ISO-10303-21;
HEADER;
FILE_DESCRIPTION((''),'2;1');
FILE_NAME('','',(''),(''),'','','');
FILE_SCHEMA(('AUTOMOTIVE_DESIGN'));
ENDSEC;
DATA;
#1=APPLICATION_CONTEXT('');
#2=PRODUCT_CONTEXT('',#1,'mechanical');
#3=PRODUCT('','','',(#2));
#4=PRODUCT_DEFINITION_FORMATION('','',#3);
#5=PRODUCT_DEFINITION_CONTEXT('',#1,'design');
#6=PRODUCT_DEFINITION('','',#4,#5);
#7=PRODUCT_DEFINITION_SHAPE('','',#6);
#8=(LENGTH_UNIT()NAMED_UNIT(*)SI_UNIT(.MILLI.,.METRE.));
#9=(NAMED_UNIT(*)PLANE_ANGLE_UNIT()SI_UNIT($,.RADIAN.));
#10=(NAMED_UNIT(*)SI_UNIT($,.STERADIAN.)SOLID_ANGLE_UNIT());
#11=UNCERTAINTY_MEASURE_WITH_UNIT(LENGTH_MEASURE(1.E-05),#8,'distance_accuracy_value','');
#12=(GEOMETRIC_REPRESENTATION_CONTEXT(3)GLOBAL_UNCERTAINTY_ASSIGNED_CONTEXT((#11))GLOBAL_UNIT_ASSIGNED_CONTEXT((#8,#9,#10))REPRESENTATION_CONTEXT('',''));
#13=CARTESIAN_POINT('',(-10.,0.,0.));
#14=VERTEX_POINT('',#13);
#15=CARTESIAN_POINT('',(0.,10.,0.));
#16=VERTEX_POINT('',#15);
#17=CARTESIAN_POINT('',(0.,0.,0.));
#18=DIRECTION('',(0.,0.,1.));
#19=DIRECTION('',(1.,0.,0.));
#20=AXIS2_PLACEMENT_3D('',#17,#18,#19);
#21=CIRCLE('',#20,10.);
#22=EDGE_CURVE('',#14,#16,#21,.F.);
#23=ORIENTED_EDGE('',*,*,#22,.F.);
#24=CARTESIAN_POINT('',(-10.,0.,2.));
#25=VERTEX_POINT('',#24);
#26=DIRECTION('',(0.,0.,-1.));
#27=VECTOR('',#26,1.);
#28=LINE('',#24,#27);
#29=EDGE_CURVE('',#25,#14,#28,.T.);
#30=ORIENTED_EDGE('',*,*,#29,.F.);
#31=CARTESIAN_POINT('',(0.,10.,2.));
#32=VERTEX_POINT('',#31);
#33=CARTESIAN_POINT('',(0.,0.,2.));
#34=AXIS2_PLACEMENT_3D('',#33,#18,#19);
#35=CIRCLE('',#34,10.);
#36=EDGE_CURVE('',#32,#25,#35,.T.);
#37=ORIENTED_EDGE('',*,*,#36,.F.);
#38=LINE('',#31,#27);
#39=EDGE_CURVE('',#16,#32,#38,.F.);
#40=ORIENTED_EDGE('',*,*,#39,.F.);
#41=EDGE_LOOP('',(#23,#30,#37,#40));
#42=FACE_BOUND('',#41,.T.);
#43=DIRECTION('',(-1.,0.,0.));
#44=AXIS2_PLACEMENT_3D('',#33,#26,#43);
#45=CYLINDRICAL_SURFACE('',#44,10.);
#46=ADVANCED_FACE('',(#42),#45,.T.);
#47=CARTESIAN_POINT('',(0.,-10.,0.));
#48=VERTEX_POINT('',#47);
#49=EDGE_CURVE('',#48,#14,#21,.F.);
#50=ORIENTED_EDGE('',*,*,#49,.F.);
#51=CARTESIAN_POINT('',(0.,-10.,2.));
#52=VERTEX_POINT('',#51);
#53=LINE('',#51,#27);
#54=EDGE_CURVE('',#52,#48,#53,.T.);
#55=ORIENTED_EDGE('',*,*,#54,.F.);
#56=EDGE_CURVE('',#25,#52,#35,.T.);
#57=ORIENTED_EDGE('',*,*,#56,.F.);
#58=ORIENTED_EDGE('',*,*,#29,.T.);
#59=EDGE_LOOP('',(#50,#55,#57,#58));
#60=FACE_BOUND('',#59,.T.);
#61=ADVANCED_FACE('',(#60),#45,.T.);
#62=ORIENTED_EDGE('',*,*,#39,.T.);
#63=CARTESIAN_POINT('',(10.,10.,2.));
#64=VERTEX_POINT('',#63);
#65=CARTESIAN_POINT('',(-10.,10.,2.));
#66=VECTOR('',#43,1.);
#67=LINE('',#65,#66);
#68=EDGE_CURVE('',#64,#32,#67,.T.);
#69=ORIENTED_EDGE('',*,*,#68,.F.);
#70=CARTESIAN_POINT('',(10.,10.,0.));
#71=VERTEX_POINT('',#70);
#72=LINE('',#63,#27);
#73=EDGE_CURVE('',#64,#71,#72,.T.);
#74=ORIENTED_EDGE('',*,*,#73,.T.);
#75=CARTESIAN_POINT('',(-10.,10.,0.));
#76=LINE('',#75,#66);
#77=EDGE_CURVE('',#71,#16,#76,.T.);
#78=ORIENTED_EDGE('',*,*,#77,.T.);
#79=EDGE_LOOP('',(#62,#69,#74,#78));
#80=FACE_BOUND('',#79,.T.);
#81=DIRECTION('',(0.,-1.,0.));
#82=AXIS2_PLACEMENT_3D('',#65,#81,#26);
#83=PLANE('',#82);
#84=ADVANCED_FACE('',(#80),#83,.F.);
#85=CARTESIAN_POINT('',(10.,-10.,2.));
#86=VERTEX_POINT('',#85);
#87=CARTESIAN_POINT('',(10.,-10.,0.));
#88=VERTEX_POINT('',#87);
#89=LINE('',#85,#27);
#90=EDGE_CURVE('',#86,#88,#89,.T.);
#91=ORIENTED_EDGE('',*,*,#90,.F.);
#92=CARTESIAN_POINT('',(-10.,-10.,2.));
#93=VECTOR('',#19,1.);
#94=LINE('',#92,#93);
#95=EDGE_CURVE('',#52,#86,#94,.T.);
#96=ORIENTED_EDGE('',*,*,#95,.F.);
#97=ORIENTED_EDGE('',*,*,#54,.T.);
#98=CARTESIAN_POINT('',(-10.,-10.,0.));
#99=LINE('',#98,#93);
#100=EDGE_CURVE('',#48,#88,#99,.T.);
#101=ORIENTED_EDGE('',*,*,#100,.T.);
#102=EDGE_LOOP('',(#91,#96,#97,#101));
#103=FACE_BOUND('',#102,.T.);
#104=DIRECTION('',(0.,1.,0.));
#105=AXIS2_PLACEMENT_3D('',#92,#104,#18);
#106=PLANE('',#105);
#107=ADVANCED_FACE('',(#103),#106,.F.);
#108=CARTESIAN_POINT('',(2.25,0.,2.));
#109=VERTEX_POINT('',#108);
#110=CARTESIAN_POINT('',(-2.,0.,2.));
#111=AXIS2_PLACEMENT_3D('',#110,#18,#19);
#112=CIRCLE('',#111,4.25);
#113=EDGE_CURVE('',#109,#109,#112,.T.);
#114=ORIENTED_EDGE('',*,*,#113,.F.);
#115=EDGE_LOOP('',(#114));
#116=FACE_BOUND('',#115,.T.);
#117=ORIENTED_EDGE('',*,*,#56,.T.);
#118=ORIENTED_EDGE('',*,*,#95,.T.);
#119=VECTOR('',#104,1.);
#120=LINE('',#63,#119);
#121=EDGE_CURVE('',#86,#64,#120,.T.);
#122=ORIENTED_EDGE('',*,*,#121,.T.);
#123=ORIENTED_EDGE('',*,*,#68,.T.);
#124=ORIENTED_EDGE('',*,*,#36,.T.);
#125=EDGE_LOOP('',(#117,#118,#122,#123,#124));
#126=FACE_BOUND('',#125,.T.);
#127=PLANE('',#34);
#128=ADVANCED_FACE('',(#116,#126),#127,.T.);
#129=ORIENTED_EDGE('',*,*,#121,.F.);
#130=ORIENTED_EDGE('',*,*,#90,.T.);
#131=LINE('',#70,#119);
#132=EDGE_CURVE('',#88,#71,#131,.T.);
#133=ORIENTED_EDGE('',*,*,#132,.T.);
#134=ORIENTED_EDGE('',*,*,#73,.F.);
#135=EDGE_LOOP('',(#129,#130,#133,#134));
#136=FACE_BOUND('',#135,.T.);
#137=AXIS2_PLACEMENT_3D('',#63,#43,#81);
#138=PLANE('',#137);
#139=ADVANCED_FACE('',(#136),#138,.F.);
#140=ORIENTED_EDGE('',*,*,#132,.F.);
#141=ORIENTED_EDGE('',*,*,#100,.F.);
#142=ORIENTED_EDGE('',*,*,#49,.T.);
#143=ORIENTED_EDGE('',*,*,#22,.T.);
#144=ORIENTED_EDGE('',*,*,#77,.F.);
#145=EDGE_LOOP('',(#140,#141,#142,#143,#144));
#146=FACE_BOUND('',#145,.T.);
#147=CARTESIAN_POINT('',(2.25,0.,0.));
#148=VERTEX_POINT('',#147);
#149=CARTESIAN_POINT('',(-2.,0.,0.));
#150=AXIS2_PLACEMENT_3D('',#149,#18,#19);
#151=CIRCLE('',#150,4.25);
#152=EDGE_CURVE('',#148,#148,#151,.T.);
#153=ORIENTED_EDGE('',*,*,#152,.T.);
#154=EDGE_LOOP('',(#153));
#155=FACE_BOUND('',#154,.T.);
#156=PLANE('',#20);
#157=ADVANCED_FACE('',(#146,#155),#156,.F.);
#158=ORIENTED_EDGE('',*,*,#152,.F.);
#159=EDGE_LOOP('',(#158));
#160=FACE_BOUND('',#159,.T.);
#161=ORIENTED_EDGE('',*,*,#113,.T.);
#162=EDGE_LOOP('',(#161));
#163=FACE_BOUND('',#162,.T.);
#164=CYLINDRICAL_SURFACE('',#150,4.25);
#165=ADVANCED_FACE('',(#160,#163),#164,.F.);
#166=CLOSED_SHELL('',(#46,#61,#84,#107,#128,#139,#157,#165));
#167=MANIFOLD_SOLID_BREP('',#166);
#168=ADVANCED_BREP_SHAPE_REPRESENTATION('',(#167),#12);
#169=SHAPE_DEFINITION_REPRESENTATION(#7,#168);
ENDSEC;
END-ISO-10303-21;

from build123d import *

# Parameters (mm, degrees)
SKETCH2_W           = 20
SKETCH2_H           = 20
BOSS_EXTRUDE1_DEPTH = 2
SKETCH3_R           = 4.25
CUT_EXTRUDE1_DEPTH  = 15.282856857
FILLET1_R           = 10


with BuildPart() as part:
    # Sketch2 → Boss-Extrude1 (new body)
    with BuildSketch(Plane.XY):
        Rectangle(SKETCH2_W, SKETCH2_H)
    extrude(amount=BOSS_EXTRUDE1_DEPTH)

    # Sketch3 → Cut-Extrude1 (cut, through all)
    with BuildSketch(Plane.XY.offset(2)):
        with Locations((-2, 0)):
            Circle(SKETCH3_R)
    extrude(amount=-CUT_EXTRUDE1_DEPTH, mode=Mode.SUBTRACT)

    # Fillet1
    fillet1_edges = [part.edges().sort_by_distance(p)[0] for p in [
        (-10, -10, 1),
        (-10, 10, 1),
    ]]
    fillet(fillet1_edges, radius=FILLET1_R - 0.0001)  # a hair under: the kernel refuses the full size


solid = part.part
